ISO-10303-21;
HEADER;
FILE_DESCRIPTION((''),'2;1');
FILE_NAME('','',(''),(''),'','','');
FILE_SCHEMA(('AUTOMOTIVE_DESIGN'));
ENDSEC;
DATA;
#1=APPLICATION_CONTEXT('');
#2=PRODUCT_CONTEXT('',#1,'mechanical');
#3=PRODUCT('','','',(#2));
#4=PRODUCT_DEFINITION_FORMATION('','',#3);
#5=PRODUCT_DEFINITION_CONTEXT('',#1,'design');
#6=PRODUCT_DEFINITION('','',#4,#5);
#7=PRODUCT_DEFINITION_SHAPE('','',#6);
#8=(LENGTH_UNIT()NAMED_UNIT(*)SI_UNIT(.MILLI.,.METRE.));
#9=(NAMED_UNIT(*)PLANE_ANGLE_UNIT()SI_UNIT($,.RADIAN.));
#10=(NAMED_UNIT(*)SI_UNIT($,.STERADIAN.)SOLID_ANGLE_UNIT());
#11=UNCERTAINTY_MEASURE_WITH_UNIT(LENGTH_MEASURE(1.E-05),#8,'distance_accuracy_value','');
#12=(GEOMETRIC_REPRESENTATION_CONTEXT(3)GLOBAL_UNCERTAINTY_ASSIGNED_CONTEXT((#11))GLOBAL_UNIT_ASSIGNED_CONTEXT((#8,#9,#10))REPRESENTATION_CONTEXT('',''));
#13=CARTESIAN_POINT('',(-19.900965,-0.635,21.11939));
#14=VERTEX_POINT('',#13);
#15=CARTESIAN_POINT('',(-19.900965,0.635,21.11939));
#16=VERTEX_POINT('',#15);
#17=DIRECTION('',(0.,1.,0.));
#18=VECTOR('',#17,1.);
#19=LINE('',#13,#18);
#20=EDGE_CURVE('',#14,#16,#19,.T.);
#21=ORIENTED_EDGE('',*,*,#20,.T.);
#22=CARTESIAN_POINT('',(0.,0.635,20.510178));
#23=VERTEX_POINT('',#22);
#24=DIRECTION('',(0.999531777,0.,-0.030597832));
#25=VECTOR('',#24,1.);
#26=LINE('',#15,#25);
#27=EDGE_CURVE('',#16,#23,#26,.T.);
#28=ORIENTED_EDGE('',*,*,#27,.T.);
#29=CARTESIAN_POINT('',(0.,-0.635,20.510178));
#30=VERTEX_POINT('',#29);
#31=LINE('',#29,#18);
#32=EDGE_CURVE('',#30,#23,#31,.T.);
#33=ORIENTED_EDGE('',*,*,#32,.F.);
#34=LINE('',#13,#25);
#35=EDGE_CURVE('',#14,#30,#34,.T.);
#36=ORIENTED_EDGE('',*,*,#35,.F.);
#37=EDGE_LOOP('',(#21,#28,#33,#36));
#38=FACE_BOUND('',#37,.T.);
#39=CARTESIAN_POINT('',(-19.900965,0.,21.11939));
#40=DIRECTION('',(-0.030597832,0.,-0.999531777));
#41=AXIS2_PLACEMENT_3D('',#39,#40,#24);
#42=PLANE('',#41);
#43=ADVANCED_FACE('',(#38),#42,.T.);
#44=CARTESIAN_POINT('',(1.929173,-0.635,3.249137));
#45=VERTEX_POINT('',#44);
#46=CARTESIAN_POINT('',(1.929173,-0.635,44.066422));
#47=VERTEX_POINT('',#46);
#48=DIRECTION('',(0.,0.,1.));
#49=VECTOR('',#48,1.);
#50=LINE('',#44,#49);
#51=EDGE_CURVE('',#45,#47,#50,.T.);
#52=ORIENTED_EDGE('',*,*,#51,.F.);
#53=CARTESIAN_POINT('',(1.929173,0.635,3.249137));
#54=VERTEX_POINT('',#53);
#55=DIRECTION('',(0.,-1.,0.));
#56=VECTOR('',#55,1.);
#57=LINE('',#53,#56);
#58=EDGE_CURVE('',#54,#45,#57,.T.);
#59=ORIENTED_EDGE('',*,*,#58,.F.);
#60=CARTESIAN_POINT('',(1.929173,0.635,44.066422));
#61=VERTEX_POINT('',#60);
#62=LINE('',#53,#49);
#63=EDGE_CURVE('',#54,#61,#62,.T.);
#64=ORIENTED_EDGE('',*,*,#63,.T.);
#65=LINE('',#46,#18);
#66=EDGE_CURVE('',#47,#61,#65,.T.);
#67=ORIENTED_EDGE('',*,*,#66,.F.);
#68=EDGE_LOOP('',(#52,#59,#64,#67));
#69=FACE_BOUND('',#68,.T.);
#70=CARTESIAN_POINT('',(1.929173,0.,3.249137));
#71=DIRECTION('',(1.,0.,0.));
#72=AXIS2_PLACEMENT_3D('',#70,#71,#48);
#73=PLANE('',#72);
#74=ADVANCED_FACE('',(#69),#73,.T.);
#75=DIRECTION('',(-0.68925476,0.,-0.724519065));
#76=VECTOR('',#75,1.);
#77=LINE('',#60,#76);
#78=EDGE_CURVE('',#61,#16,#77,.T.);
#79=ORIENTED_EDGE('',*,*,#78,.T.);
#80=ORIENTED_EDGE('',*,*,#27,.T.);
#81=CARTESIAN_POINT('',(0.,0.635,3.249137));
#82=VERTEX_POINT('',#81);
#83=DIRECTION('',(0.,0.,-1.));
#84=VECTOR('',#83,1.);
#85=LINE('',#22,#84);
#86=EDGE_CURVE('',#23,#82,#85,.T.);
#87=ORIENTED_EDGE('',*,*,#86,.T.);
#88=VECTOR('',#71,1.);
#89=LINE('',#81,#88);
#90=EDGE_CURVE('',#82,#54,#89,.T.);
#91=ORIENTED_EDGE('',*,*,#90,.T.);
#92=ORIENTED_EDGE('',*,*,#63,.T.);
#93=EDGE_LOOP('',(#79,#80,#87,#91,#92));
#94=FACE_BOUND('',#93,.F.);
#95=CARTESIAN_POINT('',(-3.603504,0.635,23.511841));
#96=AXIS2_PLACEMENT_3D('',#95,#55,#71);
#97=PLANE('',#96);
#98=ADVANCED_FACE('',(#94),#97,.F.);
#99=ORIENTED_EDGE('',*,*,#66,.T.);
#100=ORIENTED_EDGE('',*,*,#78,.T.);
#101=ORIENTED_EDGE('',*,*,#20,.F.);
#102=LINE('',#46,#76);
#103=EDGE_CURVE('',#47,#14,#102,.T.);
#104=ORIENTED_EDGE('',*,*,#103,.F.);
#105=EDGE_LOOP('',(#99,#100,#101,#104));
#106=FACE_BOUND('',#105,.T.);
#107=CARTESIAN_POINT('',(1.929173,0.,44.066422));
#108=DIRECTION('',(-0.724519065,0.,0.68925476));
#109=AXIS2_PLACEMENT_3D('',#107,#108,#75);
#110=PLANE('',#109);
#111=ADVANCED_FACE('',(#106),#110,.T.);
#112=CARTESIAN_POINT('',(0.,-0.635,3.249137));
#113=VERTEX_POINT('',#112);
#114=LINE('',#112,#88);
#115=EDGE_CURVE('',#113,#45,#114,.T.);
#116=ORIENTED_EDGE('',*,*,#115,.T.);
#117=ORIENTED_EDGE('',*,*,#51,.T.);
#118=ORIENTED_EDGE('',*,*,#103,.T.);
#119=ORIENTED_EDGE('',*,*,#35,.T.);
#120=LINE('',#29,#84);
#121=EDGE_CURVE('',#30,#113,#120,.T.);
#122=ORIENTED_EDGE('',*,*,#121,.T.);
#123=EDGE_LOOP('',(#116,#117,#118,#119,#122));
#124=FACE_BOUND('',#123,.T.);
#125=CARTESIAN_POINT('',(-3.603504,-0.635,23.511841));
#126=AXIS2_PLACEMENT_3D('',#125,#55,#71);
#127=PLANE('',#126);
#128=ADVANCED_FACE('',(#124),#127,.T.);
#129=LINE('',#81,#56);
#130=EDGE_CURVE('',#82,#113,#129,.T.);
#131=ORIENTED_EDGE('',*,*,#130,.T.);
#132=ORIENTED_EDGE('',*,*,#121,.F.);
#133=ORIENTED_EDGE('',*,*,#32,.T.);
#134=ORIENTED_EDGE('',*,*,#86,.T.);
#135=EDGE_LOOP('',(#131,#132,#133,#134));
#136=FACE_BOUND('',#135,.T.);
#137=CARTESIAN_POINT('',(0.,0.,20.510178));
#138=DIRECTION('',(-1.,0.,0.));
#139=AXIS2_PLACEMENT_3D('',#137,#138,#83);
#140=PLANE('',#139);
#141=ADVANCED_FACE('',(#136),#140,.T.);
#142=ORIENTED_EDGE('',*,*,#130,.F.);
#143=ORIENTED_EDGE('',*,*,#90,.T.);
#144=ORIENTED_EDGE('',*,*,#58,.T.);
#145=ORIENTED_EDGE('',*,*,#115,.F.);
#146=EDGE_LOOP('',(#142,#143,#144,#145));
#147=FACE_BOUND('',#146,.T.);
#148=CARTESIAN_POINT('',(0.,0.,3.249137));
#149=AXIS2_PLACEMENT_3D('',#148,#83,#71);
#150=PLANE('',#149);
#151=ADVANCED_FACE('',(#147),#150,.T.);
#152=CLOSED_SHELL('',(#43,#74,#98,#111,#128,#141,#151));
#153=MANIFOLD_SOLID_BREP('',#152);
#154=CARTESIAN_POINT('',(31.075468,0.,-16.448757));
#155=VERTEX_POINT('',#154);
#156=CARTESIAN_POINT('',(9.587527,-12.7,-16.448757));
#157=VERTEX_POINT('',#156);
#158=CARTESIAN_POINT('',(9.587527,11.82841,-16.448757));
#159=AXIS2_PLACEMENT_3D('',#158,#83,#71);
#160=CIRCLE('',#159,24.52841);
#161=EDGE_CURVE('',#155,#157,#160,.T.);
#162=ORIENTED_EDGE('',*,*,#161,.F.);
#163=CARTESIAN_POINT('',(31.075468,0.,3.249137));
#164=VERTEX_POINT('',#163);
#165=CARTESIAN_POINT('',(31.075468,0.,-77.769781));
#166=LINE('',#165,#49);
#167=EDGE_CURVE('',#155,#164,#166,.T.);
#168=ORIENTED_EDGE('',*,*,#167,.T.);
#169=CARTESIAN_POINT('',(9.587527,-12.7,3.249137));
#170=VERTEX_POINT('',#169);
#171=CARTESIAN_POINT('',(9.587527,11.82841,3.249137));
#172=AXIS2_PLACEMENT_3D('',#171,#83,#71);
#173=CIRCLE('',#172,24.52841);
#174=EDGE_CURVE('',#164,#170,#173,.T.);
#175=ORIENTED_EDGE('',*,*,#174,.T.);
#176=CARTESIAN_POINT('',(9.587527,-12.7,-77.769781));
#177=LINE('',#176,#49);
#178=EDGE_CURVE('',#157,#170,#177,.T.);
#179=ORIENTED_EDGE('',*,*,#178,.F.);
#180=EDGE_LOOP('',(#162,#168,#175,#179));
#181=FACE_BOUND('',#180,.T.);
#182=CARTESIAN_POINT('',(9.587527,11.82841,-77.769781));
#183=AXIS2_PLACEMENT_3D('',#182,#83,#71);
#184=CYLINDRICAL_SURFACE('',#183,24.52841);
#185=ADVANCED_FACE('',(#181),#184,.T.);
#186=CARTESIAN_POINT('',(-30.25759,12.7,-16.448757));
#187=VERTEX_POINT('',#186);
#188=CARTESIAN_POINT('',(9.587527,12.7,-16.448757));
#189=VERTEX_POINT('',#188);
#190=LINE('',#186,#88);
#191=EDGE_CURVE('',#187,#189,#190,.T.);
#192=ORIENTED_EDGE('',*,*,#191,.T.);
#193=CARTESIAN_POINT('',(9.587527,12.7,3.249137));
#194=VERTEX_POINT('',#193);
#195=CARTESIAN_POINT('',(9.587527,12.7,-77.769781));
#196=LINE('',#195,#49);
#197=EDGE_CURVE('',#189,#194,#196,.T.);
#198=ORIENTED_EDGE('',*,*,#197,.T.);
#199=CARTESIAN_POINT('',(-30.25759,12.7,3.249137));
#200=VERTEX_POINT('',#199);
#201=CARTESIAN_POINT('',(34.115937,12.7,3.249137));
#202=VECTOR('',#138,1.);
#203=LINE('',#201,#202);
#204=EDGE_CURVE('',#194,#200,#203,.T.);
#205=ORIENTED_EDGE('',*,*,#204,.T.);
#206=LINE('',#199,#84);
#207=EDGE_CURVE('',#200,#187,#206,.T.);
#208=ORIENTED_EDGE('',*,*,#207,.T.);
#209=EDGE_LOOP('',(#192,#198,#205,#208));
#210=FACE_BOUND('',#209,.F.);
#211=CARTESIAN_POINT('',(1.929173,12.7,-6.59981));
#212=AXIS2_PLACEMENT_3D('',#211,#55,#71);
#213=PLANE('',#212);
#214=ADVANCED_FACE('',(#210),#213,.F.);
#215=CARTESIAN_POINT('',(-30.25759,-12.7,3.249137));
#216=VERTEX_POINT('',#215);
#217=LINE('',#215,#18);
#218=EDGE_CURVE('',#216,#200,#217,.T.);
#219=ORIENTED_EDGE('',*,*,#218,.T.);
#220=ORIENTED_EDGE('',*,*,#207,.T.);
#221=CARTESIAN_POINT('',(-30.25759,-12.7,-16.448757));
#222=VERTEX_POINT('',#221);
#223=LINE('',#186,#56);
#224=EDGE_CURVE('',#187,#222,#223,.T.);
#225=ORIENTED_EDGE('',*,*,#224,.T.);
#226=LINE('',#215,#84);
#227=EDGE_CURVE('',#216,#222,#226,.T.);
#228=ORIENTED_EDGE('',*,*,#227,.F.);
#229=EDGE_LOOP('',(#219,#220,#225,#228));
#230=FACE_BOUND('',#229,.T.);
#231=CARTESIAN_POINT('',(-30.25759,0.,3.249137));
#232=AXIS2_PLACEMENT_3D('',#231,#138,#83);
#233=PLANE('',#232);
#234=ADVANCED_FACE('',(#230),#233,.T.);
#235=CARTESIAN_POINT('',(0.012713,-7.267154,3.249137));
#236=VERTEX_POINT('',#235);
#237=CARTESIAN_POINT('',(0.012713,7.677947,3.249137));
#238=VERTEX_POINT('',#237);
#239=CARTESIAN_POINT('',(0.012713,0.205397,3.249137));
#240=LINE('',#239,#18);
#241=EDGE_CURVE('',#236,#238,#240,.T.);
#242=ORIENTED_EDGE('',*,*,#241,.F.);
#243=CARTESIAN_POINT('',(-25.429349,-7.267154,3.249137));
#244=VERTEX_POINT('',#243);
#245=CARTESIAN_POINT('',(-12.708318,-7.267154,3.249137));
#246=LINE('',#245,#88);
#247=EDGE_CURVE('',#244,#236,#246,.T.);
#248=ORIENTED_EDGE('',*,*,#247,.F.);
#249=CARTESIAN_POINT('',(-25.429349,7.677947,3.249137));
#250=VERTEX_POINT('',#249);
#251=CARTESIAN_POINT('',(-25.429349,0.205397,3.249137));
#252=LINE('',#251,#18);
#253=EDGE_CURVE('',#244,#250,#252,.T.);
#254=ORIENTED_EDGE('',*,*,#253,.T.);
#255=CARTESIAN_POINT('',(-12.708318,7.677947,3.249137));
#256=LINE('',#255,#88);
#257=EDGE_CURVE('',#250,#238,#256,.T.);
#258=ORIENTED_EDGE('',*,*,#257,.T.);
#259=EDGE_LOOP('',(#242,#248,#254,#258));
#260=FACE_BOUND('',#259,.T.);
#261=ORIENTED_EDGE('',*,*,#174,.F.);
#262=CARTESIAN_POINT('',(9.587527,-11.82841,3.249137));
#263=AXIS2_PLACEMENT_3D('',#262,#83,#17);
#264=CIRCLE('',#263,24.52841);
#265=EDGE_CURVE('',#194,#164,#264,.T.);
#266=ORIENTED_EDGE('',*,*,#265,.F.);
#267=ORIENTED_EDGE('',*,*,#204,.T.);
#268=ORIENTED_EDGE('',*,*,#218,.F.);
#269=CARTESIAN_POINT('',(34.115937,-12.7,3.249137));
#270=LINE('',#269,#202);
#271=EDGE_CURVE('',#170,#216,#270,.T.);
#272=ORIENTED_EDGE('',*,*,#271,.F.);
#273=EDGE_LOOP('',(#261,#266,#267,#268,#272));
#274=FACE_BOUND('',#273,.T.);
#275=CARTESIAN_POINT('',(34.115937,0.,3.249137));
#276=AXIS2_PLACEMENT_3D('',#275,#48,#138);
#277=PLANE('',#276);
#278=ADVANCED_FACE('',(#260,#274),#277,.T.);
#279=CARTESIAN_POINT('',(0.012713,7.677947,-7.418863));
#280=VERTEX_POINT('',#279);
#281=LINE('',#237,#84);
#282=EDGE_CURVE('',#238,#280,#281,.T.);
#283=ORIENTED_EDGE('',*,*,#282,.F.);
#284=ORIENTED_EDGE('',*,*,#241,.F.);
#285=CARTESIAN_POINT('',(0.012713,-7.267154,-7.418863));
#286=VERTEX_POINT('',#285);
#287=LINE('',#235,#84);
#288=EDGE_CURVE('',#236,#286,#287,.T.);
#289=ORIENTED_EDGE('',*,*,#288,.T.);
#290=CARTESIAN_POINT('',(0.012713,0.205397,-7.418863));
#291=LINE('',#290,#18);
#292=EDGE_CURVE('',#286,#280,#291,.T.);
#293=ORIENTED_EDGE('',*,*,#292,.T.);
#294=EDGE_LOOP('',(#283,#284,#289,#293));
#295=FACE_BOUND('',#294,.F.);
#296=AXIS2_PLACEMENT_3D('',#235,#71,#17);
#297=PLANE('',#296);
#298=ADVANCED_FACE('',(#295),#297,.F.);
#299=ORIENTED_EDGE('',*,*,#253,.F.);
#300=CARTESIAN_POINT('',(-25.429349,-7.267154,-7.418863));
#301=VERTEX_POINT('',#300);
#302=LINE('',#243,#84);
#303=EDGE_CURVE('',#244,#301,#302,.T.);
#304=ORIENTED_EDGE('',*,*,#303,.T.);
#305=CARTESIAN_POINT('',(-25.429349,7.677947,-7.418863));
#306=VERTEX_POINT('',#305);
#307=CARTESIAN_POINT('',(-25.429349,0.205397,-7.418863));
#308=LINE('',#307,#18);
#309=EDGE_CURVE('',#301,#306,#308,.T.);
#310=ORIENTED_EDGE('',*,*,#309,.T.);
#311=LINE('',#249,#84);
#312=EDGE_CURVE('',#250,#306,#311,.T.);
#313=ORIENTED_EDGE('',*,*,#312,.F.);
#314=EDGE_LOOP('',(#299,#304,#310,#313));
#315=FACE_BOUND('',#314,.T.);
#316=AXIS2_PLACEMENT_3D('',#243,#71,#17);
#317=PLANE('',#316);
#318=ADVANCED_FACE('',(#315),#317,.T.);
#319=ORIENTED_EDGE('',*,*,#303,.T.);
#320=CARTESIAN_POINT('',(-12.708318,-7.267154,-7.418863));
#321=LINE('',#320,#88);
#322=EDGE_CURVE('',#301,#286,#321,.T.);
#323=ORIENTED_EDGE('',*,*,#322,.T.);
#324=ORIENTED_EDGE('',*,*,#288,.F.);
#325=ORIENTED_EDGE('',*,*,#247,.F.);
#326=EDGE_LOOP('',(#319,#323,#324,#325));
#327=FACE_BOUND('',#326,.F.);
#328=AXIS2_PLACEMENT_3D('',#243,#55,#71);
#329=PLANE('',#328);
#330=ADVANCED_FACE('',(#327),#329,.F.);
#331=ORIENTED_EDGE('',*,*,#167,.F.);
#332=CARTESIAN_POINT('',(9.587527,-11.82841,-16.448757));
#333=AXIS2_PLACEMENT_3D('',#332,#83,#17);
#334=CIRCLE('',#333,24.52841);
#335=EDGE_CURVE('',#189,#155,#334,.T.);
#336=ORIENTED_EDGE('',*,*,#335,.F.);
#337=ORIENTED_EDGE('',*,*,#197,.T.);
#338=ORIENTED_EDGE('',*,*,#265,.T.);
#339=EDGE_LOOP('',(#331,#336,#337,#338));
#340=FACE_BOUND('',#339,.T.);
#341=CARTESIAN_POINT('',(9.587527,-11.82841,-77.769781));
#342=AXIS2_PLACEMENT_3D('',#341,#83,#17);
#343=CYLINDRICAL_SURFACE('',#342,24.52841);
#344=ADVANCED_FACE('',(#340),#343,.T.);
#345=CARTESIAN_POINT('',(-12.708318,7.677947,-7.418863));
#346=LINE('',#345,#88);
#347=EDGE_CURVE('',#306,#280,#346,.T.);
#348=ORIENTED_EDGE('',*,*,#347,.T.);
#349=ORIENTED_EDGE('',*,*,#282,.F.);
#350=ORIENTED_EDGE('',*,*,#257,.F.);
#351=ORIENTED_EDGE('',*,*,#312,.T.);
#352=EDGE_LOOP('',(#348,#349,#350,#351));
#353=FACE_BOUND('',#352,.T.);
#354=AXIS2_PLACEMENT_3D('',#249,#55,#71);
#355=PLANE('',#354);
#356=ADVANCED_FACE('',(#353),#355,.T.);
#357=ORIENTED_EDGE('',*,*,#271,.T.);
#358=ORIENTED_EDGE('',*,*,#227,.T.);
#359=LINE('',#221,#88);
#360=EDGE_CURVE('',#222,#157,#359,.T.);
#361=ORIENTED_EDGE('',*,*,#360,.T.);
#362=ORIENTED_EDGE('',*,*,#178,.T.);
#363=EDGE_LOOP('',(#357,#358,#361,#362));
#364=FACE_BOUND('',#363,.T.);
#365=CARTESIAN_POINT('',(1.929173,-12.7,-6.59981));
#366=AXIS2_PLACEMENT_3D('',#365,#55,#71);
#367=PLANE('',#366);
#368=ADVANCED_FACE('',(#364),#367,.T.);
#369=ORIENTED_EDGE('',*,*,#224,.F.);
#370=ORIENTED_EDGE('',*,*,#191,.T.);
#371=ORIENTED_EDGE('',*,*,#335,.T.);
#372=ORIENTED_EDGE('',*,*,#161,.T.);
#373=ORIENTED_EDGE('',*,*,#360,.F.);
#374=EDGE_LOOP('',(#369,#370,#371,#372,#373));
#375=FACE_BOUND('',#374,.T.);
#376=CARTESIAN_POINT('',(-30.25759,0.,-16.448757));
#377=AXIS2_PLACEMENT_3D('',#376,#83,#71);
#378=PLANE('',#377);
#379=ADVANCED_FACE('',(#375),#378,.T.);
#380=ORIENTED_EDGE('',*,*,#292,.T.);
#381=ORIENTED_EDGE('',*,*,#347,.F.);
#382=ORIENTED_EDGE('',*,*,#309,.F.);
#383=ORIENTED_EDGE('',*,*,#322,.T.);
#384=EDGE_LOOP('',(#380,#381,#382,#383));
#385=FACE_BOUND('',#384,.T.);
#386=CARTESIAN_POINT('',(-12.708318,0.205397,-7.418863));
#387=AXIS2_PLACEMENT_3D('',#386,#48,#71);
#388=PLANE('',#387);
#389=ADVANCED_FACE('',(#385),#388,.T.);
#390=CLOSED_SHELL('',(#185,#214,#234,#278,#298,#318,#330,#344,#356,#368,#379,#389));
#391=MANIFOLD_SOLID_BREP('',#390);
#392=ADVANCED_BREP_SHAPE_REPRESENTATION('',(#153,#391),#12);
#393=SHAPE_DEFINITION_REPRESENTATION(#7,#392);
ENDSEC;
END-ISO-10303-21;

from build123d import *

# Parameters (mm, degrees)
F1_DEPTH    = 12.7
F2_T1_DEPTH = 142.3399426123
F3_DEPTH    = 0.635
F4_W        = 25.4420624115
F4_H        = 14.9451009929
F5_DEPTH    = 10.668


# Not quite as in the source:
# - a fillet or chamfer that OpenCascade refuses, or shapes differently, is made with other operations: its cross-section is extruded or revolved along the edge and cut away or added


with BuildPart() as f1:
    # F0 (on Front) → F1 (new body, symmetric)
    with BuildSketch(Plane.XZ):
        Polygon((0, 3.2491369639), (-30.2575901151, 3.2491369639), (-30.2575901151, -16.4487566799), (34.1159366071, -16.4487566799), (34.1159366071, 3.2491369639), (1.929173246, 3.2491369639), align=None)
    extrude(amount=F1_DEPTH, both=True)

    # F2: fillet of radius 24.5284097937 on 2 edges, made by hand

    # F2_s2 → F2_t1 (cut)
    with BuildSketch(Plane.XY.offset(-77.7697811642)):
        with BuildLine():
            ThreePointArc((34.1159366071, 11.8284097937), (26.9317317103, -5.5157951031), (9.5875268134, -12.7))
            Line((9.5875268134, -12.7), (34.1159366071, -12.7))
            Line((34.1159366071, -12.7), (34.1159366071, 11.8284097937))
        make_face()
        with BuildLine():
            ThreePointArc((9.5875268134, 12.7), (26.9317317103, 5.5157951031), (34.1159366071, -11.8284097937))
            Line((34.1159366071, -11.8284097937), (34.1159366071, 12.7))
            Line((34.1159366071, 12.7), (9.5875268134, 12.7))
        make_face()
    extrude(amount=F2_T1_DEPTH, mode=Mode.SUBTRACT)

    # F4 (on face) → F5 (cut)
    with BuildSketch(Plane.XY.offset(3.2491369639)):
        with Locations((-12.7083181869, 0.2053966746)):
            Rectangle(F4_W, F4_H)
    extrude(amount=-F5_DEPTH, mode=Mode.SUBTRACT)


with BuildPart() as f3:
    # F0 (on Front) → F3 (new body, symmetric)
    with BuildSketch(Plane.XZ):
        Polygon((0, 20.5101780593), (0, 3.2491369639), (1.929173246, 3.2491369639), (1.929173246, 44.0664216876), (-19.900964573, 21.119389683), align=None)
    extrude(amount=F3_DEPTH, both=True)


solid = Compound([f1.part, f3.part])
